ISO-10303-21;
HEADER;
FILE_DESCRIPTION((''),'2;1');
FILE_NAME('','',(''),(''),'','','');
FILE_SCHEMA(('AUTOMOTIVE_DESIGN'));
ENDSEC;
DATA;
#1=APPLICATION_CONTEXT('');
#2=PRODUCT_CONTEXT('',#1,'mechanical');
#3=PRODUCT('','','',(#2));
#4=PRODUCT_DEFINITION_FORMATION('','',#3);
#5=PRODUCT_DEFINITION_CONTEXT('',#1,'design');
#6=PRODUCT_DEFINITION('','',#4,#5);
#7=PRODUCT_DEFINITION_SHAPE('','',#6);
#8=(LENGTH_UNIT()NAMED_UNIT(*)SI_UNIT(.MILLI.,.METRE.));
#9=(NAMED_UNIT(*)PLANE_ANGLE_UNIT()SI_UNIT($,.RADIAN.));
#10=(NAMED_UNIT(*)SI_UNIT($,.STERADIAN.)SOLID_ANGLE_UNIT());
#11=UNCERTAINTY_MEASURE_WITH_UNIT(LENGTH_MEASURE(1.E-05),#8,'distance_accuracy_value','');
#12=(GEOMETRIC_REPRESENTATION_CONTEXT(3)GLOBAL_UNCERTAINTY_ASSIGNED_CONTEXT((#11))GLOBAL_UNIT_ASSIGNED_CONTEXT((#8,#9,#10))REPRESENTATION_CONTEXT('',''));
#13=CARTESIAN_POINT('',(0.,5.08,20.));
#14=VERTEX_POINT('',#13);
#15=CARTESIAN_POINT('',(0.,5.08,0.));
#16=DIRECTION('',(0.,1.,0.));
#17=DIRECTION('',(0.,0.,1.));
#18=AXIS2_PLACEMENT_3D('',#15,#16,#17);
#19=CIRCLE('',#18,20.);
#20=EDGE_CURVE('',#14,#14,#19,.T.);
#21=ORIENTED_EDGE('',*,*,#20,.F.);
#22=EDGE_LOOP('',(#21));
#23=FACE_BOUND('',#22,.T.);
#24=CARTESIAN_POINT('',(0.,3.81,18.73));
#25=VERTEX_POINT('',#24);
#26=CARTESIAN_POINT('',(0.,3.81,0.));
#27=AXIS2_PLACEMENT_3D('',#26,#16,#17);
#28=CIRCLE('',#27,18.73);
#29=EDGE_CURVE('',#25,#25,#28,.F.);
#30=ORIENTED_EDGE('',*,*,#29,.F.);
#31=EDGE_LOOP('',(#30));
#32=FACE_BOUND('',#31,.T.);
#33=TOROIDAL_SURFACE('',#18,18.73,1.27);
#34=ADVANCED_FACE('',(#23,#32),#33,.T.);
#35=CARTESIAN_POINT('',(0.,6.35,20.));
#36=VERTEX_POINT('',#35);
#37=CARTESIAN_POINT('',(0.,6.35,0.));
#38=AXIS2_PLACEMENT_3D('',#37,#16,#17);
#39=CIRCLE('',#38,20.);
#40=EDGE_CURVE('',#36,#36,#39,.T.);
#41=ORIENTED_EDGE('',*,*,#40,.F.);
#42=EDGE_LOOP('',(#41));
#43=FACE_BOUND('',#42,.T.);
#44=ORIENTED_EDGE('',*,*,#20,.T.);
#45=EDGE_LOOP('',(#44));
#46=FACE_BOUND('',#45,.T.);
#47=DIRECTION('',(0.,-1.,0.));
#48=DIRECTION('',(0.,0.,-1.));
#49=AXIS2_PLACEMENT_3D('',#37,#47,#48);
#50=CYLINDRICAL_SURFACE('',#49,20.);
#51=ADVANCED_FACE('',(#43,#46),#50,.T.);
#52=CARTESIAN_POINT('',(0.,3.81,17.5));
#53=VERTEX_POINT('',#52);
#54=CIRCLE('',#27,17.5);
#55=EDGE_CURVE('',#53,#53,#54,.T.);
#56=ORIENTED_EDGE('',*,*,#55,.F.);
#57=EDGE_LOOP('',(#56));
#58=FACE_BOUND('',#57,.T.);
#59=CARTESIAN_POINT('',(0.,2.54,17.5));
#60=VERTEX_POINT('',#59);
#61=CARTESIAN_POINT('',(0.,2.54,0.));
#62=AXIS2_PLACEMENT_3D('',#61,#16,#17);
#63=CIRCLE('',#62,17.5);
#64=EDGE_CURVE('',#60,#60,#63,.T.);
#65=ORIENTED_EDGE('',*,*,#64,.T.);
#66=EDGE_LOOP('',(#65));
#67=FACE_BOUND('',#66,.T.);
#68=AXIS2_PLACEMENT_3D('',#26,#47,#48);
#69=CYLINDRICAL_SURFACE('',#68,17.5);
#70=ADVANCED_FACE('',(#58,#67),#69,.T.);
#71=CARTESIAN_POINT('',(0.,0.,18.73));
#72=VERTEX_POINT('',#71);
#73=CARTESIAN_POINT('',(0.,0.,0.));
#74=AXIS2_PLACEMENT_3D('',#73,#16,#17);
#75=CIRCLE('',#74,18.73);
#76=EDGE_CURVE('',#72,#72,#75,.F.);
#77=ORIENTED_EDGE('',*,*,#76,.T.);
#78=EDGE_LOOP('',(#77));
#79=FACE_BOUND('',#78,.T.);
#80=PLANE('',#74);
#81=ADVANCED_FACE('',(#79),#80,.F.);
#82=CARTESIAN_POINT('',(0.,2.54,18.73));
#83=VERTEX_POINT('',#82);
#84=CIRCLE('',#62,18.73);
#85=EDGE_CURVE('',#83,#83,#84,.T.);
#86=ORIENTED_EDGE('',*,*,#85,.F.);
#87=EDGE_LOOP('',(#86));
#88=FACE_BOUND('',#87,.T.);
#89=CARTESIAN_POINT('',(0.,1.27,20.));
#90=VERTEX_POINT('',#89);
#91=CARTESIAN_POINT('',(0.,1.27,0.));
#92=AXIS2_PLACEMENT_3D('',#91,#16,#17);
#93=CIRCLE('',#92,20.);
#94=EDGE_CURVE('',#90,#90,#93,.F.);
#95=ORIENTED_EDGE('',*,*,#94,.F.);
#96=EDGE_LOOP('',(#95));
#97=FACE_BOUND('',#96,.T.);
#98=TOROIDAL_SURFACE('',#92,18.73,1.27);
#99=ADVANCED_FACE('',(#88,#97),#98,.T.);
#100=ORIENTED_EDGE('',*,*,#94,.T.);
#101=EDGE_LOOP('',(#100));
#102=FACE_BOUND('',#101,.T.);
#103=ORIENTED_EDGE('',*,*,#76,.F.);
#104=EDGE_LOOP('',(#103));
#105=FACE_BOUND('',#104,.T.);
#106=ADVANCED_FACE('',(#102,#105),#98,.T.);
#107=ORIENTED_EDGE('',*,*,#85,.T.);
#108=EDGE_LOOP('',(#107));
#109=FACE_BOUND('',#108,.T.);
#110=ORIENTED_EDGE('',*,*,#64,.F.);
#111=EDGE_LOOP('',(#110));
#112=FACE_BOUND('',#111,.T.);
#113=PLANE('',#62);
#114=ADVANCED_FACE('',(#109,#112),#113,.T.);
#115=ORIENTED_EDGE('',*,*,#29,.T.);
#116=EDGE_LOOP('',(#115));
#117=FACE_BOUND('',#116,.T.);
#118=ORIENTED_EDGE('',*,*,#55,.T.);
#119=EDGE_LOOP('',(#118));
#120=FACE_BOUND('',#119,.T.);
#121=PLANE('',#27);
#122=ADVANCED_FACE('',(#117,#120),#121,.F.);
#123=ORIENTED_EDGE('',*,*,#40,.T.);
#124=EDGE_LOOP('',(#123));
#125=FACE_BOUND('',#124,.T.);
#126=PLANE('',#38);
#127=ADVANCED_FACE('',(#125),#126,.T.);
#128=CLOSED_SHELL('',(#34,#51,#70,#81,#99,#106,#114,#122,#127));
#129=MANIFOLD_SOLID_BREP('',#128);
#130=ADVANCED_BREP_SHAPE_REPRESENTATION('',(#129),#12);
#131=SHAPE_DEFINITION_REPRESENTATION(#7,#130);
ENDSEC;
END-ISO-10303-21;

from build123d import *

# Parameters (mm, degrees)
SKETCH1_R           = 20
BOSS_EXTRUDE1_DEPTH = 2.54
SKETCH2_R           = 17.5
BOSS_EXTRUDE2_DEPTH = 1.27
SKETCH3_R           = 20
BOSS_EXTRUDE3_DEPTH = 2.54
FILLET1_R           = 1.27
FILLET2_R           = 1.27


with BuildPart() as part:
    # Sketch1 → Boss-Extrude1 (new body)
    with BuildSketch(Plane(origin=(0, 0, 0), x_dir=(1, 0, 0), z_dir=(0, 1, 0))):
        with Locations(Location((0, 0, 0), (0, 0, 270))):
            Circle(SKETCH1_R)
    extrude(amount=BOSS_EXTRUDE1_DEPTH)

    # Sketch2 → Boss-Extrude2 (add)
    with BuildSketch(Plane(origin=(0, 2.54, 0), x_dir=(1, 0, 0), z_dir=(0, 1, 0))):
        with Locations(Location((0, 0, 0), (0, 0, 270))):
            Circle(SKETCH2_R)
    extrude(amount=BOSS_EXTRUDE2_DEPTH)

    # Sketch3 → Boss-Extrude3 (add)
    with BuildSketch(Plane(origin=(0, 3.81, 0), x_dir=(1, 0, 0), z_dir=(0, 1, 0))):
        with Locations(Location((0, 0, 0), (0, 0, 270))):
            Circle(SKETCH3_R)
    extrude(amount=BOSS_EXTRUDE3_DEPTH)

    # Fillet1
    fillet1_edges = [part.edges().sort_by_distance(p)[0] for p in [
        (0, 3.81, -20),
    ]]
    fillet(fillet1_edges, radius=FILLET1_R)

    # Fillet2
    fillet2_edges = [part.edges().sort_by_distance(p)[0] for p in [
        (0, 0, -20),
        (0, 2.54, -20),
    ]]
    fillet(fillet2_edges, radius=FILLET2_R - 0.0001)  # a hair under: the kernel refuses the full size


solid = part.part
